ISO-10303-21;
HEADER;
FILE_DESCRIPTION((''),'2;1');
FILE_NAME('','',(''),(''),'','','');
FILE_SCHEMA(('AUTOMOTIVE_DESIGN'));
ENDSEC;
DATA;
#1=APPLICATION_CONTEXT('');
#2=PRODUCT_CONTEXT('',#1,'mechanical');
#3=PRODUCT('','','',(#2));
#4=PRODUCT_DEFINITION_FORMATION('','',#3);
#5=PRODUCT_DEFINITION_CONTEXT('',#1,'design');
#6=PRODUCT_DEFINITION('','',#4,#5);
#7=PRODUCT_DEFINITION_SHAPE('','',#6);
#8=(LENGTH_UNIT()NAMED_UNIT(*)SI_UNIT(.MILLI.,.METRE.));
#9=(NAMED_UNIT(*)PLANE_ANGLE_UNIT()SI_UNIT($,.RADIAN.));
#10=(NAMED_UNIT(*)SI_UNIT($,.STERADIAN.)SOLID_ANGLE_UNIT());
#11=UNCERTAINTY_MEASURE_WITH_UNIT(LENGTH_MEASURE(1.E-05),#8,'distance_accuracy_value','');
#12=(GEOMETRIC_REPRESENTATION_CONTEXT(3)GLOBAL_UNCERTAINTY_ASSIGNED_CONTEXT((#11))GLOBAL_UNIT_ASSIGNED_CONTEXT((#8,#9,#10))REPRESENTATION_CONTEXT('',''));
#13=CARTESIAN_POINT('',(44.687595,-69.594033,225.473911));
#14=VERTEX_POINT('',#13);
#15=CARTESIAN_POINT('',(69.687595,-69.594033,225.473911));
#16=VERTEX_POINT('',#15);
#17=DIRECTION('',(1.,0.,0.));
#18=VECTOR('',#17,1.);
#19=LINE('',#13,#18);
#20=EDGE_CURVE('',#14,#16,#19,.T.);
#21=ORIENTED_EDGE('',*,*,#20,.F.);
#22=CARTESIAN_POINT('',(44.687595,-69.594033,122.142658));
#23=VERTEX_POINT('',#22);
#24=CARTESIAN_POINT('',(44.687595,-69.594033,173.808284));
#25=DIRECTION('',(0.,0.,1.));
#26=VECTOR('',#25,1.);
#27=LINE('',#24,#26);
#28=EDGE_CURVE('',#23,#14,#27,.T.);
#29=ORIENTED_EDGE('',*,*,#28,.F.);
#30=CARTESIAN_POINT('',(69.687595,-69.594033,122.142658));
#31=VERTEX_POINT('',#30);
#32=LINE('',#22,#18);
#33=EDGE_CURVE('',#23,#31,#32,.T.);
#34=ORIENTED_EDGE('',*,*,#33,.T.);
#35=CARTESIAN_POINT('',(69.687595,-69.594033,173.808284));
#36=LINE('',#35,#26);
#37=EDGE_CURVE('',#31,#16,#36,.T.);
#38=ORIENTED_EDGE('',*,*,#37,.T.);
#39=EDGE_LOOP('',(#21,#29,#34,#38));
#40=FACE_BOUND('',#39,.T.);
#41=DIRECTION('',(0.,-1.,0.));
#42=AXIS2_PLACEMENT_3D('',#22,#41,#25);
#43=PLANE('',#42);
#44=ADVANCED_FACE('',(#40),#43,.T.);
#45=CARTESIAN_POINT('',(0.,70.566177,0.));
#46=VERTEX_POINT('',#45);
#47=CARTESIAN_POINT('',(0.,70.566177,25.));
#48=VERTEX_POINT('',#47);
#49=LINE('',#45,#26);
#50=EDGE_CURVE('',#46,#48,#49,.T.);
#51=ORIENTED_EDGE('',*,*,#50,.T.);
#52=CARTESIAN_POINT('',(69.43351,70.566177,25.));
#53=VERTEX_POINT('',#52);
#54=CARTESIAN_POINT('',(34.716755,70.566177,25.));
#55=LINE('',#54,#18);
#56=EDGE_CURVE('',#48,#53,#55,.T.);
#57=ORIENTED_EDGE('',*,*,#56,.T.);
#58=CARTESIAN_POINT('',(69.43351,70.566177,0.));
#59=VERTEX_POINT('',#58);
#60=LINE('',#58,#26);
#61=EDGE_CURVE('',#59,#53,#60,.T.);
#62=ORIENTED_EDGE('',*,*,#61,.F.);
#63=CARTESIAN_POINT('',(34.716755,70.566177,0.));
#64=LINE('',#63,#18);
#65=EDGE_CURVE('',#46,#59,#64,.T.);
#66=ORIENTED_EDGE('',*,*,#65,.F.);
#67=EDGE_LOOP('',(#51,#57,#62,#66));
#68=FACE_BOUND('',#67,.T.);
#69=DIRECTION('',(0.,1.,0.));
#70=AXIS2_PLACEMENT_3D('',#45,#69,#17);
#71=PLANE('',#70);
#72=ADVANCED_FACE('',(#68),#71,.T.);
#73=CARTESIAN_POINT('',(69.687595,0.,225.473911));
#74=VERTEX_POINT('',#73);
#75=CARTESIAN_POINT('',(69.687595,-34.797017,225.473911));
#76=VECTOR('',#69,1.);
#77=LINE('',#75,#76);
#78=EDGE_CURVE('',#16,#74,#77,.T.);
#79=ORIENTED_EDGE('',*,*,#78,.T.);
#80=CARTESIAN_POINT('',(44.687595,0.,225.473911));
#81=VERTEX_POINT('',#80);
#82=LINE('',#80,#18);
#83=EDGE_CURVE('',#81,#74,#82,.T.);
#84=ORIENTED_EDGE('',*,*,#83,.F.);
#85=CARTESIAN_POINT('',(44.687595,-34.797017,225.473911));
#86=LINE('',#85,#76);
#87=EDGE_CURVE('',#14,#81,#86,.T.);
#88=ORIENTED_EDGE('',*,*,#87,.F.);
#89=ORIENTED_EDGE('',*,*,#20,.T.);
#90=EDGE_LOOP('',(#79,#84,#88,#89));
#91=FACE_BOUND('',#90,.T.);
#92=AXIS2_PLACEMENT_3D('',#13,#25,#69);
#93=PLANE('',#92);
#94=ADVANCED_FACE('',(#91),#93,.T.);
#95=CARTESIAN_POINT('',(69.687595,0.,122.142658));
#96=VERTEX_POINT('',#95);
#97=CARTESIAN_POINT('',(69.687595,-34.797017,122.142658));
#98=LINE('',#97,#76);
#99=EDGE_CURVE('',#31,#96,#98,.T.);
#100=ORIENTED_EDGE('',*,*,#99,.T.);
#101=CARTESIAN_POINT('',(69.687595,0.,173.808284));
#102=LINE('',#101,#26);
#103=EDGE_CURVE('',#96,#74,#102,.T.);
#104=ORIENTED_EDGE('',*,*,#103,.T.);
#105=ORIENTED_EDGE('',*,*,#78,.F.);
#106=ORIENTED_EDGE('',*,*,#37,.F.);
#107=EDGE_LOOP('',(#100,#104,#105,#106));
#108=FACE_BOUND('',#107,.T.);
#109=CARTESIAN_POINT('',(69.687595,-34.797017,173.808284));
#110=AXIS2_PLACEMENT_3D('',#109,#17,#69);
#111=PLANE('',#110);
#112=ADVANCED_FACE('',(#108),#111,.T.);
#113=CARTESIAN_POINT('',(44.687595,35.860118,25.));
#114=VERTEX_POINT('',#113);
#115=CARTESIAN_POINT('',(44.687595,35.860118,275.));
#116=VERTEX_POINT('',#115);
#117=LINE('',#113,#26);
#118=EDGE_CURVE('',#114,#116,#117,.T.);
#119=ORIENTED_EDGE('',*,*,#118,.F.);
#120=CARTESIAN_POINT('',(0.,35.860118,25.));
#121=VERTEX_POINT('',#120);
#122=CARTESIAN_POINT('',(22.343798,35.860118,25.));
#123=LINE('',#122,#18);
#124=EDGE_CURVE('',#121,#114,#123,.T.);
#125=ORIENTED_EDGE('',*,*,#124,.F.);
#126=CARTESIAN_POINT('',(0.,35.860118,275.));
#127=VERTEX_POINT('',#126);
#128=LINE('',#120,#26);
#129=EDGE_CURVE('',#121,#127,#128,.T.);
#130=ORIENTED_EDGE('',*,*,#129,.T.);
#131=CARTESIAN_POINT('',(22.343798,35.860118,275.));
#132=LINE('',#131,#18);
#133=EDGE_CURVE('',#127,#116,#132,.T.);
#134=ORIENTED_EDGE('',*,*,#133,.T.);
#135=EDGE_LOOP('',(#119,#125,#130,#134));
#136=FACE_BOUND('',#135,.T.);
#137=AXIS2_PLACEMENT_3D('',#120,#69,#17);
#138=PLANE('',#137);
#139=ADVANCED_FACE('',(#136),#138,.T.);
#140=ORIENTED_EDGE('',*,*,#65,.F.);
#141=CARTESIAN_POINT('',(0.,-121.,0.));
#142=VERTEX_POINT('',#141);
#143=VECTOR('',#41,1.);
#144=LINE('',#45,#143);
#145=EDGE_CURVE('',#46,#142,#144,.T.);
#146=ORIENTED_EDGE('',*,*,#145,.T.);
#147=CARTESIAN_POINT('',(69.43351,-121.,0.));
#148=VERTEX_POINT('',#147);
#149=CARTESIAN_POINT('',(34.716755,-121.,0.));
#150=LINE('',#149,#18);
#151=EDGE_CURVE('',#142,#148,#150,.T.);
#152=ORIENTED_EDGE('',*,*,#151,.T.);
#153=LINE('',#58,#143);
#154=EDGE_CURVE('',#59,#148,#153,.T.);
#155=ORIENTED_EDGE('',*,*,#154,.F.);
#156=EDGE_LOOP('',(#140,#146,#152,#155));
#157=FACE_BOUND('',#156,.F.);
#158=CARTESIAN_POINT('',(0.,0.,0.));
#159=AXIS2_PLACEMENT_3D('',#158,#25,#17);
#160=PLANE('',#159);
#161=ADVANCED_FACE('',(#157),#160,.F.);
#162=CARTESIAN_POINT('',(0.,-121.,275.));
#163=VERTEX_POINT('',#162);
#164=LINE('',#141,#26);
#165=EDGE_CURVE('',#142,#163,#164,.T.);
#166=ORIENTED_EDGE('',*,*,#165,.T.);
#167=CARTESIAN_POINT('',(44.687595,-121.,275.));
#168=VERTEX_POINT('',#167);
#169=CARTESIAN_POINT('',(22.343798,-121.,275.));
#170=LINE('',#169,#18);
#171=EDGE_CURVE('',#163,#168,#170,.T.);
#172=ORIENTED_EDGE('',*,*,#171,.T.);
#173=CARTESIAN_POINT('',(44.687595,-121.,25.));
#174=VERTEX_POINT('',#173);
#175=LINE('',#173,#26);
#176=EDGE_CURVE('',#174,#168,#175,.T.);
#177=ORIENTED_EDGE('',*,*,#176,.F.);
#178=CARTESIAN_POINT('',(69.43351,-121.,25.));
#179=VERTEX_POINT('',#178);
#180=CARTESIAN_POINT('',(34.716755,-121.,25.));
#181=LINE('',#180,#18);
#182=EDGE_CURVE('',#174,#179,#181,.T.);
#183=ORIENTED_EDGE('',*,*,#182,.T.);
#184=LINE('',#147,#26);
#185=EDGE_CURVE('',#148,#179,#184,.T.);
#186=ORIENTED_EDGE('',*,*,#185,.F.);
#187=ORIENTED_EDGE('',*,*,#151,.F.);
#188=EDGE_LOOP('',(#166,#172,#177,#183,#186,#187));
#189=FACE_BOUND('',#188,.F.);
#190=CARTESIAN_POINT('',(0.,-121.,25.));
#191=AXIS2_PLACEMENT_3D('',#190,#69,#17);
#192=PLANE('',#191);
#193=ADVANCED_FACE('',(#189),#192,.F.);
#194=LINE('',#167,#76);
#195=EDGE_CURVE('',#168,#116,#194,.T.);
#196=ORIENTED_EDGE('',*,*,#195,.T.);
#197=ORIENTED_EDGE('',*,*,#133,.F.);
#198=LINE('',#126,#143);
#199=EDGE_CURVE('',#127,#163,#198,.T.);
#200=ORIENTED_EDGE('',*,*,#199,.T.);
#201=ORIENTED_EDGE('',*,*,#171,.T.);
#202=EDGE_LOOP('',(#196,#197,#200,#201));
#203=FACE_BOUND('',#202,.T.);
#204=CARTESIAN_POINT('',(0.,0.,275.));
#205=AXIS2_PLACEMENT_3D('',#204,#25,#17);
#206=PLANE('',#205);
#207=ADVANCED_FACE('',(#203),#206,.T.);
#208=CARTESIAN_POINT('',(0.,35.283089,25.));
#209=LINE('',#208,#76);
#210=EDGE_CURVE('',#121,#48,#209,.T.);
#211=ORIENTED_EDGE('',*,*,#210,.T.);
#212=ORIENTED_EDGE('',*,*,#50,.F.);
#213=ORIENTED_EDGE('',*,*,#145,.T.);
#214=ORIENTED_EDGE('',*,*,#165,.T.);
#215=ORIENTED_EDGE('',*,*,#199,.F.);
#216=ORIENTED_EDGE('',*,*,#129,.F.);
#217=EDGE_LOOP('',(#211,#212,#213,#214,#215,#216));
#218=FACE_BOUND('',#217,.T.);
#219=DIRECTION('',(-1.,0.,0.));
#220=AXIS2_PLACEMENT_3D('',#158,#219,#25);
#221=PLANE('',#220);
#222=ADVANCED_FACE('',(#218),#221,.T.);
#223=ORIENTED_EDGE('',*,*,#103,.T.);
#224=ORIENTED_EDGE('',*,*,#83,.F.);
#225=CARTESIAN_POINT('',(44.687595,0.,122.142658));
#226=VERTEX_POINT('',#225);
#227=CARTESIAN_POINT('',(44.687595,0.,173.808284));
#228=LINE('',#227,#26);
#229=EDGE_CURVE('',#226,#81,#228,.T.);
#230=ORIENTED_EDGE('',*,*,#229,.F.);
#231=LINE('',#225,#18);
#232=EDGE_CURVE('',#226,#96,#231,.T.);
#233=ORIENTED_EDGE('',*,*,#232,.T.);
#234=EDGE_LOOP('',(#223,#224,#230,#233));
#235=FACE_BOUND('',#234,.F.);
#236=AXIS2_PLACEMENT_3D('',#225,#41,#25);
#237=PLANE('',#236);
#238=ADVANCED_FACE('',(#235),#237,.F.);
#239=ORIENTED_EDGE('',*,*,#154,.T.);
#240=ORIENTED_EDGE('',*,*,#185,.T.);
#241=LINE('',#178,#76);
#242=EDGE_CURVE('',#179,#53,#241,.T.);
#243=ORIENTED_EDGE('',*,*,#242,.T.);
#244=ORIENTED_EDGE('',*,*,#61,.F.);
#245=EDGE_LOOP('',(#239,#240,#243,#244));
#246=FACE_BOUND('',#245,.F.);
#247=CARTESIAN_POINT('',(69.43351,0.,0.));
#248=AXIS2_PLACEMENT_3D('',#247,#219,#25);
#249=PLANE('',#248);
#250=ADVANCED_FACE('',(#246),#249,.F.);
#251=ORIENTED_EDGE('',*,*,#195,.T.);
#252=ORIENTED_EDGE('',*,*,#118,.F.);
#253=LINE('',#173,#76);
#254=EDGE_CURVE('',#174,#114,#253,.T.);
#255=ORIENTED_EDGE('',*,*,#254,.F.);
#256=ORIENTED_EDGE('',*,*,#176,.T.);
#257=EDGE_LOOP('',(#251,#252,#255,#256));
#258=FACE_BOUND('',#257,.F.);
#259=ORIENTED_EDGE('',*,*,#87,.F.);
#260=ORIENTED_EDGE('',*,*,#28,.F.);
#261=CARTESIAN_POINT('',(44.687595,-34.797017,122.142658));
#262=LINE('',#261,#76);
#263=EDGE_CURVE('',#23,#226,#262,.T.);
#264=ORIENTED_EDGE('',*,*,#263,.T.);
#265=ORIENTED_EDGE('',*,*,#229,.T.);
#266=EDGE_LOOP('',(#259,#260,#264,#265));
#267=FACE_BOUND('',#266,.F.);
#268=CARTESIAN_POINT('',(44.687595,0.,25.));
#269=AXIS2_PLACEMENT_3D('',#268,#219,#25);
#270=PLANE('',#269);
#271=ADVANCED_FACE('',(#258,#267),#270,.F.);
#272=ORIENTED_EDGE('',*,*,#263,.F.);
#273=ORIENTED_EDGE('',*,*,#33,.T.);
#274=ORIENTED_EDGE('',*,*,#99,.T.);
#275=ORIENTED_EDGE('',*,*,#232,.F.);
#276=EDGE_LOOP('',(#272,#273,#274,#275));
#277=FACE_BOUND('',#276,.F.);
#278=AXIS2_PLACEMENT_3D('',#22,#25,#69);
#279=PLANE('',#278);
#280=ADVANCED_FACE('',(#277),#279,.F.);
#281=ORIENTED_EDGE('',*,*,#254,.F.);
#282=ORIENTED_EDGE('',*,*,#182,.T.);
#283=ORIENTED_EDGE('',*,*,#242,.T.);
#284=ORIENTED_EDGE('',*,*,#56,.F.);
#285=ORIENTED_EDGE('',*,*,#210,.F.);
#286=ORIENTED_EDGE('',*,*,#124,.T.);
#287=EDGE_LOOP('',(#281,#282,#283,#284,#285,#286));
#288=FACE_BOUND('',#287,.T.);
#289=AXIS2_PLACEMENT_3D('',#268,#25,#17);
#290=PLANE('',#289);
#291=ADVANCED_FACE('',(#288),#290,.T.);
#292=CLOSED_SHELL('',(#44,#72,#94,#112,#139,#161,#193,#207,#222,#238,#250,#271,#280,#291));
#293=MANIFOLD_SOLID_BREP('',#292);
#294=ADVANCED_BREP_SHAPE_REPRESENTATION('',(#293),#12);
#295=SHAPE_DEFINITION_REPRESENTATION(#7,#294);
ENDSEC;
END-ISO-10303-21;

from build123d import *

# Parameters (mm, degrees)
F0_W     = 69.4335103035
F0_H     = 70.5661773682
F1_DEPTH = 25
F2_W     = 44.6875952184
F2_H     = 35.8601175249
F3_DEPTH = 250
F4_DEPTH = 121
F5_W     = 69.5940330625
F5_H     = 103.3312529325
F7_DEPTH = 25


# Not quite as in the source:
# - the program builds the solid bodies; features that only make, move or delete a surface that nothing else refers to are left out


with BuildPart() as f1:
    # F0 (on Top) → F1 (new body)
    with BuildSketch(Plane.XY):
        with Locations((34.7167551517, 35.2830886841)):
            Rectangle(F0_W, F0_H)
    extrude(amount=F1_DEPTH)

    # F2 (on face) → F3 (join)
    with BuildSketch(Plane.XY.offset(25)):
        with Locations((22.3437976092, 17.9300587624)):
            Rectangle(F2_W, F2_H)
    extrude(amount=F3_DEPTH)

    # F4 (add): a face of the model
    f4_faces = [f1.faces().sort_by_distance(p)[0] for p in [
        (24.0077180628, 0, 131.5089430654),
    ]]
    extrude(f4_faces, amount=F4_DEPTH)

    # F5 (on face) → F7 (join)
    with BuildSketch(Plane.YZ.offset(44.6875952184)):
        with Locations((-34.7970165312, 173.8082841039)):
            Rectangle(F5_W, F5_H)
    extrude(amount=F7_DEPTH)


solid = f1.part
